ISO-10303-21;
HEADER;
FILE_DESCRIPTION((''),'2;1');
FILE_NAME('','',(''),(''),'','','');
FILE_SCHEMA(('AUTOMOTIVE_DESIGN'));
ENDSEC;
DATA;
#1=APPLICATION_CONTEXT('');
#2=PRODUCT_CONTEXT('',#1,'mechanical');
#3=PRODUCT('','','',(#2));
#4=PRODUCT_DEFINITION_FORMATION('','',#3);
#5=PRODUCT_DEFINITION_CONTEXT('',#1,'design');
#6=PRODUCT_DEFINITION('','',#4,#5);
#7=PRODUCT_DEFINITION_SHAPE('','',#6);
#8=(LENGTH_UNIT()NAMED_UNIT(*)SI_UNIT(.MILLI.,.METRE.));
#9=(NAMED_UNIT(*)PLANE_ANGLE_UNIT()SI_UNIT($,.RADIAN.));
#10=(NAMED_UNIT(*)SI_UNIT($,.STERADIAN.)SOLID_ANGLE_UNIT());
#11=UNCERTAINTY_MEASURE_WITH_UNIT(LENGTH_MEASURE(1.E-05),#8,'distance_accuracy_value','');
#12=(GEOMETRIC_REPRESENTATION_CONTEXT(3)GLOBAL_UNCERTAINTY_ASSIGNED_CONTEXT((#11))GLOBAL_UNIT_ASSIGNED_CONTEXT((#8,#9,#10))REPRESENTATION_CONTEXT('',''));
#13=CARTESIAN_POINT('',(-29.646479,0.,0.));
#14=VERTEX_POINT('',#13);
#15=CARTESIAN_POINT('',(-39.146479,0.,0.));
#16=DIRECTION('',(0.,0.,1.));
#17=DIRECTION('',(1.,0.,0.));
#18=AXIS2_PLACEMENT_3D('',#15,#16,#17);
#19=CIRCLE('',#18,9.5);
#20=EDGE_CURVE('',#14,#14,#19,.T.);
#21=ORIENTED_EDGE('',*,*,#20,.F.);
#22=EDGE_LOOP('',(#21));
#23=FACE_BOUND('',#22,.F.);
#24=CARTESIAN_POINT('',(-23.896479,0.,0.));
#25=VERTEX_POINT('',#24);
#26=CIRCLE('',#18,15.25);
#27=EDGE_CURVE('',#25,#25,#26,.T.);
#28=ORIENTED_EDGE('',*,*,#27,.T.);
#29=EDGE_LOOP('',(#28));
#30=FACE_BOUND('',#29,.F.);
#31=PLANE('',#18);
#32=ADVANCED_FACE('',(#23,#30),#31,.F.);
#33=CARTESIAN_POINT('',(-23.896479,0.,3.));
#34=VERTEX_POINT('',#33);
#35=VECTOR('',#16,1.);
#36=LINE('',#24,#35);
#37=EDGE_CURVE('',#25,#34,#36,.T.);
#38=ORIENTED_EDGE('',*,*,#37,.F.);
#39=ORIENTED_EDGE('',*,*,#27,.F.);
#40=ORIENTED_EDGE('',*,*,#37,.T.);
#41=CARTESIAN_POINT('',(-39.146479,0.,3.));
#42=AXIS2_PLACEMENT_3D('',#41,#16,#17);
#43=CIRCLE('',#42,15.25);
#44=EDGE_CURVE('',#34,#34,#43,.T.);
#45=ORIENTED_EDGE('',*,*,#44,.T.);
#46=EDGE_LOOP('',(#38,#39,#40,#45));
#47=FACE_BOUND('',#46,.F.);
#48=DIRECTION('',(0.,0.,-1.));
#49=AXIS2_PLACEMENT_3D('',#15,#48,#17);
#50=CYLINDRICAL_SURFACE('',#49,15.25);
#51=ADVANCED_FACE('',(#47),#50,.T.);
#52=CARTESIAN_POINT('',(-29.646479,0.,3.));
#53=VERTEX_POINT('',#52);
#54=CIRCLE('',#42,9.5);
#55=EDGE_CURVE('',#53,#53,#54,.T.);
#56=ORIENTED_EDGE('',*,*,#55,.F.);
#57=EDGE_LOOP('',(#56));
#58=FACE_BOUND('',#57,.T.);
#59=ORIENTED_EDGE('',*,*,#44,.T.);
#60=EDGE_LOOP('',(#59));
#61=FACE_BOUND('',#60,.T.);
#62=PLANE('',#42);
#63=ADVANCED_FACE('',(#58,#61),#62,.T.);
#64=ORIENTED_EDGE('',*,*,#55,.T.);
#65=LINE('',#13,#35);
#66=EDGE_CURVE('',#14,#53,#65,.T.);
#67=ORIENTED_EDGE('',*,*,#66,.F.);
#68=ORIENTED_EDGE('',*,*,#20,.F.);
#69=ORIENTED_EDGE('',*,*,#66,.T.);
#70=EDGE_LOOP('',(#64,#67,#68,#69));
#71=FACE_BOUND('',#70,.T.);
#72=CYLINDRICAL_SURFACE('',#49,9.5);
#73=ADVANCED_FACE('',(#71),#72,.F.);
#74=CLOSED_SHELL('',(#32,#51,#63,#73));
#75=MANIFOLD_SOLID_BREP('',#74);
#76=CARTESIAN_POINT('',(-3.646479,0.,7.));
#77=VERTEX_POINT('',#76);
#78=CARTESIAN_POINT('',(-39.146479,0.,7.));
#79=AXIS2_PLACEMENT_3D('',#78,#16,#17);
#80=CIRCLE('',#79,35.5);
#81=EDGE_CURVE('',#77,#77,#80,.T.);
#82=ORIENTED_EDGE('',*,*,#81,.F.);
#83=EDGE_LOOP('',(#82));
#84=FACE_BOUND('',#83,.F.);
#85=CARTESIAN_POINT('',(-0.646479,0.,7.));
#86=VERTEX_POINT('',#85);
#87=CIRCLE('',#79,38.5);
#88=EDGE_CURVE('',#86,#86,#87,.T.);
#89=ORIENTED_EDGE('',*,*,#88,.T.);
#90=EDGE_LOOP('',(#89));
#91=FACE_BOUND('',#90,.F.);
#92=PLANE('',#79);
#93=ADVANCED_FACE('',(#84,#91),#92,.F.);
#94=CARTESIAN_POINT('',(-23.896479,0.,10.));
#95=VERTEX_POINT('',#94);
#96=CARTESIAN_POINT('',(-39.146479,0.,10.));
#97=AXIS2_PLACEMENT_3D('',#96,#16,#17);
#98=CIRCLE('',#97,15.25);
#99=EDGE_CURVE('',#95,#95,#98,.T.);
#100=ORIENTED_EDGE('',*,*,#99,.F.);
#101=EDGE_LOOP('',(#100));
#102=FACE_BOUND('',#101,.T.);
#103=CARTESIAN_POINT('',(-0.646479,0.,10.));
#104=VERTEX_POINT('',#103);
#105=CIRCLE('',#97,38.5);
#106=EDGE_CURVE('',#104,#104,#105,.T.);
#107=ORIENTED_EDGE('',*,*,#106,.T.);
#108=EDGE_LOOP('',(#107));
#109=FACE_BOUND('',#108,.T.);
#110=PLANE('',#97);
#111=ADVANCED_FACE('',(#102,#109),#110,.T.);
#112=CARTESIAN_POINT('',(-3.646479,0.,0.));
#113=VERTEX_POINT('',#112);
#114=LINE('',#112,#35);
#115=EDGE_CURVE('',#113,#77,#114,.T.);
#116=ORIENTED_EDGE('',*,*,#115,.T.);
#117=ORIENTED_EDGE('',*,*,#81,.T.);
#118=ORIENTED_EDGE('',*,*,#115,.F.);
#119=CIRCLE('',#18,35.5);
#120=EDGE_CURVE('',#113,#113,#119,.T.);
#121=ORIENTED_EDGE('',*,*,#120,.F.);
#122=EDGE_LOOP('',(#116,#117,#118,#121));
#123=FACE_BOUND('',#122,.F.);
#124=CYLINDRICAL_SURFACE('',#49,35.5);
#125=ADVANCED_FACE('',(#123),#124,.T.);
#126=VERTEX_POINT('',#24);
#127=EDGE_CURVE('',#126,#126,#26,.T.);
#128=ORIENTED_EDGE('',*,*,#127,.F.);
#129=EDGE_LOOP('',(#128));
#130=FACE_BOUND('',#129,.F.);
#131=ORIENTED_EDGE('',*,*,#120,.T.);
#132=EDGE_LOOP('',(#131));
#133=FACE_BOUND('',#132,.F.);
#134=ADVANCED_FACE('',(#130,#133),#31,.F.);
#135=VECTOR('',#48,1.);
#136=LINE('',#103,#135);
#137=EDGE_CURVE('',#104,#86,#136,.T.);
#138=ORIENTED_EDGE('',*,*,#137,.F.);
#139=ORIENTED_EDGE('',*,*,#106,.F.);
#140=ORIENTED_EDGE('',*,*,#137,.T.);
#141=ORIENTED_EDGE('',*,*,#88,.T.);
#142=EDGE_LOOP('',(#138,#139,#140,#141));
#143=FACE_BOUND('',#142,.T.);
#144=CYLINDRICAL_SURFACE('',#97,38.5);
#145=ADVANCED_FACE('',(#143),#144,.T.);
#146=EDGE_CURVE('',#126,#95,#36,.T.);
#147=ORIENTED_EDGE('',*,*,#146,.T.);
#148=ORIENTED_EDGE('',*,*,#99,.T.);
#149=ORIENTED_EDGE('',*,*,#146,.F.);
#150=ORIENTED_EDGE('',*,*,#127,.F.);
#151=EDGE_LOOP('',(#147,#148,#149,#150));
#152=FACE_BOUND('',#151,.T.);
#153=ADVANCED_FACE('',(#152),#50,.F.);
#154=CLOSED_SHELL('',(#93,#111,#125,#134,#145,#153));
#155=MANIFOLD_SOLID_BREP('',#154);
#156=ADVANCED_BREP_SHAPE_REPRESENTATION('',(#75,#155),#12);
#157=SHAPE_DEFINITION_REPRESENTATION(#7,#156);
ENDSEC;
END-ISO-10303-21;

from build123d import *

# Parameters (mm, degrees)
F0_R     = 15.25
F0_R_2   = 9.5
F1_DEPTH = 3
F0_R_3   = 35.5
F2_DEPTH = 10
F3_R     = 38.5
F3_R_2   = 35.5
F4_DEPTH = 3


# Not quite as in the source:
# - a feature names something its author has since deleted; it is built from what else it names


with BuildPart() as f1:
    # F0 (on Top) → F1 (new body)
    with BuildSketch(Plane.XY):
        with Locations((-39.1464792192, 0)):
            Circle(F0_R)
        with Locations((-39.1464792192, 0)):
            Circle(F0_R_2, mode=Mode.SUBTRACT)
    extrude(amount=F1_DEPTH)


with BuildPart() as f2:
    # F0 (on Top) → F2 (new body)
    with BuildSketch(Plane.XY):
        with Locations((-39.1464792192, 0)):
            Circle(F0_R_3)
        with Locations((-39.1464792192, 0)):
            Circle(F0_R, mode=Mode.SUBTRACT)
    extrude(amount=F2_DEPTH)

    # F3 (on face) → F4 (join)
    with BuildSketch(Plane.XY.offset(10)):
        with Locations((-39.1464792192, 0)):
            Circle(F3_R)
        with Locations((-39.1464792192, 0)):
            Circle(F3_R_2, mode=Mode.SUBTRACT)
    extrude(amount=-F4_DEPTH)


solid = Compound([f1.part, f2.part])
